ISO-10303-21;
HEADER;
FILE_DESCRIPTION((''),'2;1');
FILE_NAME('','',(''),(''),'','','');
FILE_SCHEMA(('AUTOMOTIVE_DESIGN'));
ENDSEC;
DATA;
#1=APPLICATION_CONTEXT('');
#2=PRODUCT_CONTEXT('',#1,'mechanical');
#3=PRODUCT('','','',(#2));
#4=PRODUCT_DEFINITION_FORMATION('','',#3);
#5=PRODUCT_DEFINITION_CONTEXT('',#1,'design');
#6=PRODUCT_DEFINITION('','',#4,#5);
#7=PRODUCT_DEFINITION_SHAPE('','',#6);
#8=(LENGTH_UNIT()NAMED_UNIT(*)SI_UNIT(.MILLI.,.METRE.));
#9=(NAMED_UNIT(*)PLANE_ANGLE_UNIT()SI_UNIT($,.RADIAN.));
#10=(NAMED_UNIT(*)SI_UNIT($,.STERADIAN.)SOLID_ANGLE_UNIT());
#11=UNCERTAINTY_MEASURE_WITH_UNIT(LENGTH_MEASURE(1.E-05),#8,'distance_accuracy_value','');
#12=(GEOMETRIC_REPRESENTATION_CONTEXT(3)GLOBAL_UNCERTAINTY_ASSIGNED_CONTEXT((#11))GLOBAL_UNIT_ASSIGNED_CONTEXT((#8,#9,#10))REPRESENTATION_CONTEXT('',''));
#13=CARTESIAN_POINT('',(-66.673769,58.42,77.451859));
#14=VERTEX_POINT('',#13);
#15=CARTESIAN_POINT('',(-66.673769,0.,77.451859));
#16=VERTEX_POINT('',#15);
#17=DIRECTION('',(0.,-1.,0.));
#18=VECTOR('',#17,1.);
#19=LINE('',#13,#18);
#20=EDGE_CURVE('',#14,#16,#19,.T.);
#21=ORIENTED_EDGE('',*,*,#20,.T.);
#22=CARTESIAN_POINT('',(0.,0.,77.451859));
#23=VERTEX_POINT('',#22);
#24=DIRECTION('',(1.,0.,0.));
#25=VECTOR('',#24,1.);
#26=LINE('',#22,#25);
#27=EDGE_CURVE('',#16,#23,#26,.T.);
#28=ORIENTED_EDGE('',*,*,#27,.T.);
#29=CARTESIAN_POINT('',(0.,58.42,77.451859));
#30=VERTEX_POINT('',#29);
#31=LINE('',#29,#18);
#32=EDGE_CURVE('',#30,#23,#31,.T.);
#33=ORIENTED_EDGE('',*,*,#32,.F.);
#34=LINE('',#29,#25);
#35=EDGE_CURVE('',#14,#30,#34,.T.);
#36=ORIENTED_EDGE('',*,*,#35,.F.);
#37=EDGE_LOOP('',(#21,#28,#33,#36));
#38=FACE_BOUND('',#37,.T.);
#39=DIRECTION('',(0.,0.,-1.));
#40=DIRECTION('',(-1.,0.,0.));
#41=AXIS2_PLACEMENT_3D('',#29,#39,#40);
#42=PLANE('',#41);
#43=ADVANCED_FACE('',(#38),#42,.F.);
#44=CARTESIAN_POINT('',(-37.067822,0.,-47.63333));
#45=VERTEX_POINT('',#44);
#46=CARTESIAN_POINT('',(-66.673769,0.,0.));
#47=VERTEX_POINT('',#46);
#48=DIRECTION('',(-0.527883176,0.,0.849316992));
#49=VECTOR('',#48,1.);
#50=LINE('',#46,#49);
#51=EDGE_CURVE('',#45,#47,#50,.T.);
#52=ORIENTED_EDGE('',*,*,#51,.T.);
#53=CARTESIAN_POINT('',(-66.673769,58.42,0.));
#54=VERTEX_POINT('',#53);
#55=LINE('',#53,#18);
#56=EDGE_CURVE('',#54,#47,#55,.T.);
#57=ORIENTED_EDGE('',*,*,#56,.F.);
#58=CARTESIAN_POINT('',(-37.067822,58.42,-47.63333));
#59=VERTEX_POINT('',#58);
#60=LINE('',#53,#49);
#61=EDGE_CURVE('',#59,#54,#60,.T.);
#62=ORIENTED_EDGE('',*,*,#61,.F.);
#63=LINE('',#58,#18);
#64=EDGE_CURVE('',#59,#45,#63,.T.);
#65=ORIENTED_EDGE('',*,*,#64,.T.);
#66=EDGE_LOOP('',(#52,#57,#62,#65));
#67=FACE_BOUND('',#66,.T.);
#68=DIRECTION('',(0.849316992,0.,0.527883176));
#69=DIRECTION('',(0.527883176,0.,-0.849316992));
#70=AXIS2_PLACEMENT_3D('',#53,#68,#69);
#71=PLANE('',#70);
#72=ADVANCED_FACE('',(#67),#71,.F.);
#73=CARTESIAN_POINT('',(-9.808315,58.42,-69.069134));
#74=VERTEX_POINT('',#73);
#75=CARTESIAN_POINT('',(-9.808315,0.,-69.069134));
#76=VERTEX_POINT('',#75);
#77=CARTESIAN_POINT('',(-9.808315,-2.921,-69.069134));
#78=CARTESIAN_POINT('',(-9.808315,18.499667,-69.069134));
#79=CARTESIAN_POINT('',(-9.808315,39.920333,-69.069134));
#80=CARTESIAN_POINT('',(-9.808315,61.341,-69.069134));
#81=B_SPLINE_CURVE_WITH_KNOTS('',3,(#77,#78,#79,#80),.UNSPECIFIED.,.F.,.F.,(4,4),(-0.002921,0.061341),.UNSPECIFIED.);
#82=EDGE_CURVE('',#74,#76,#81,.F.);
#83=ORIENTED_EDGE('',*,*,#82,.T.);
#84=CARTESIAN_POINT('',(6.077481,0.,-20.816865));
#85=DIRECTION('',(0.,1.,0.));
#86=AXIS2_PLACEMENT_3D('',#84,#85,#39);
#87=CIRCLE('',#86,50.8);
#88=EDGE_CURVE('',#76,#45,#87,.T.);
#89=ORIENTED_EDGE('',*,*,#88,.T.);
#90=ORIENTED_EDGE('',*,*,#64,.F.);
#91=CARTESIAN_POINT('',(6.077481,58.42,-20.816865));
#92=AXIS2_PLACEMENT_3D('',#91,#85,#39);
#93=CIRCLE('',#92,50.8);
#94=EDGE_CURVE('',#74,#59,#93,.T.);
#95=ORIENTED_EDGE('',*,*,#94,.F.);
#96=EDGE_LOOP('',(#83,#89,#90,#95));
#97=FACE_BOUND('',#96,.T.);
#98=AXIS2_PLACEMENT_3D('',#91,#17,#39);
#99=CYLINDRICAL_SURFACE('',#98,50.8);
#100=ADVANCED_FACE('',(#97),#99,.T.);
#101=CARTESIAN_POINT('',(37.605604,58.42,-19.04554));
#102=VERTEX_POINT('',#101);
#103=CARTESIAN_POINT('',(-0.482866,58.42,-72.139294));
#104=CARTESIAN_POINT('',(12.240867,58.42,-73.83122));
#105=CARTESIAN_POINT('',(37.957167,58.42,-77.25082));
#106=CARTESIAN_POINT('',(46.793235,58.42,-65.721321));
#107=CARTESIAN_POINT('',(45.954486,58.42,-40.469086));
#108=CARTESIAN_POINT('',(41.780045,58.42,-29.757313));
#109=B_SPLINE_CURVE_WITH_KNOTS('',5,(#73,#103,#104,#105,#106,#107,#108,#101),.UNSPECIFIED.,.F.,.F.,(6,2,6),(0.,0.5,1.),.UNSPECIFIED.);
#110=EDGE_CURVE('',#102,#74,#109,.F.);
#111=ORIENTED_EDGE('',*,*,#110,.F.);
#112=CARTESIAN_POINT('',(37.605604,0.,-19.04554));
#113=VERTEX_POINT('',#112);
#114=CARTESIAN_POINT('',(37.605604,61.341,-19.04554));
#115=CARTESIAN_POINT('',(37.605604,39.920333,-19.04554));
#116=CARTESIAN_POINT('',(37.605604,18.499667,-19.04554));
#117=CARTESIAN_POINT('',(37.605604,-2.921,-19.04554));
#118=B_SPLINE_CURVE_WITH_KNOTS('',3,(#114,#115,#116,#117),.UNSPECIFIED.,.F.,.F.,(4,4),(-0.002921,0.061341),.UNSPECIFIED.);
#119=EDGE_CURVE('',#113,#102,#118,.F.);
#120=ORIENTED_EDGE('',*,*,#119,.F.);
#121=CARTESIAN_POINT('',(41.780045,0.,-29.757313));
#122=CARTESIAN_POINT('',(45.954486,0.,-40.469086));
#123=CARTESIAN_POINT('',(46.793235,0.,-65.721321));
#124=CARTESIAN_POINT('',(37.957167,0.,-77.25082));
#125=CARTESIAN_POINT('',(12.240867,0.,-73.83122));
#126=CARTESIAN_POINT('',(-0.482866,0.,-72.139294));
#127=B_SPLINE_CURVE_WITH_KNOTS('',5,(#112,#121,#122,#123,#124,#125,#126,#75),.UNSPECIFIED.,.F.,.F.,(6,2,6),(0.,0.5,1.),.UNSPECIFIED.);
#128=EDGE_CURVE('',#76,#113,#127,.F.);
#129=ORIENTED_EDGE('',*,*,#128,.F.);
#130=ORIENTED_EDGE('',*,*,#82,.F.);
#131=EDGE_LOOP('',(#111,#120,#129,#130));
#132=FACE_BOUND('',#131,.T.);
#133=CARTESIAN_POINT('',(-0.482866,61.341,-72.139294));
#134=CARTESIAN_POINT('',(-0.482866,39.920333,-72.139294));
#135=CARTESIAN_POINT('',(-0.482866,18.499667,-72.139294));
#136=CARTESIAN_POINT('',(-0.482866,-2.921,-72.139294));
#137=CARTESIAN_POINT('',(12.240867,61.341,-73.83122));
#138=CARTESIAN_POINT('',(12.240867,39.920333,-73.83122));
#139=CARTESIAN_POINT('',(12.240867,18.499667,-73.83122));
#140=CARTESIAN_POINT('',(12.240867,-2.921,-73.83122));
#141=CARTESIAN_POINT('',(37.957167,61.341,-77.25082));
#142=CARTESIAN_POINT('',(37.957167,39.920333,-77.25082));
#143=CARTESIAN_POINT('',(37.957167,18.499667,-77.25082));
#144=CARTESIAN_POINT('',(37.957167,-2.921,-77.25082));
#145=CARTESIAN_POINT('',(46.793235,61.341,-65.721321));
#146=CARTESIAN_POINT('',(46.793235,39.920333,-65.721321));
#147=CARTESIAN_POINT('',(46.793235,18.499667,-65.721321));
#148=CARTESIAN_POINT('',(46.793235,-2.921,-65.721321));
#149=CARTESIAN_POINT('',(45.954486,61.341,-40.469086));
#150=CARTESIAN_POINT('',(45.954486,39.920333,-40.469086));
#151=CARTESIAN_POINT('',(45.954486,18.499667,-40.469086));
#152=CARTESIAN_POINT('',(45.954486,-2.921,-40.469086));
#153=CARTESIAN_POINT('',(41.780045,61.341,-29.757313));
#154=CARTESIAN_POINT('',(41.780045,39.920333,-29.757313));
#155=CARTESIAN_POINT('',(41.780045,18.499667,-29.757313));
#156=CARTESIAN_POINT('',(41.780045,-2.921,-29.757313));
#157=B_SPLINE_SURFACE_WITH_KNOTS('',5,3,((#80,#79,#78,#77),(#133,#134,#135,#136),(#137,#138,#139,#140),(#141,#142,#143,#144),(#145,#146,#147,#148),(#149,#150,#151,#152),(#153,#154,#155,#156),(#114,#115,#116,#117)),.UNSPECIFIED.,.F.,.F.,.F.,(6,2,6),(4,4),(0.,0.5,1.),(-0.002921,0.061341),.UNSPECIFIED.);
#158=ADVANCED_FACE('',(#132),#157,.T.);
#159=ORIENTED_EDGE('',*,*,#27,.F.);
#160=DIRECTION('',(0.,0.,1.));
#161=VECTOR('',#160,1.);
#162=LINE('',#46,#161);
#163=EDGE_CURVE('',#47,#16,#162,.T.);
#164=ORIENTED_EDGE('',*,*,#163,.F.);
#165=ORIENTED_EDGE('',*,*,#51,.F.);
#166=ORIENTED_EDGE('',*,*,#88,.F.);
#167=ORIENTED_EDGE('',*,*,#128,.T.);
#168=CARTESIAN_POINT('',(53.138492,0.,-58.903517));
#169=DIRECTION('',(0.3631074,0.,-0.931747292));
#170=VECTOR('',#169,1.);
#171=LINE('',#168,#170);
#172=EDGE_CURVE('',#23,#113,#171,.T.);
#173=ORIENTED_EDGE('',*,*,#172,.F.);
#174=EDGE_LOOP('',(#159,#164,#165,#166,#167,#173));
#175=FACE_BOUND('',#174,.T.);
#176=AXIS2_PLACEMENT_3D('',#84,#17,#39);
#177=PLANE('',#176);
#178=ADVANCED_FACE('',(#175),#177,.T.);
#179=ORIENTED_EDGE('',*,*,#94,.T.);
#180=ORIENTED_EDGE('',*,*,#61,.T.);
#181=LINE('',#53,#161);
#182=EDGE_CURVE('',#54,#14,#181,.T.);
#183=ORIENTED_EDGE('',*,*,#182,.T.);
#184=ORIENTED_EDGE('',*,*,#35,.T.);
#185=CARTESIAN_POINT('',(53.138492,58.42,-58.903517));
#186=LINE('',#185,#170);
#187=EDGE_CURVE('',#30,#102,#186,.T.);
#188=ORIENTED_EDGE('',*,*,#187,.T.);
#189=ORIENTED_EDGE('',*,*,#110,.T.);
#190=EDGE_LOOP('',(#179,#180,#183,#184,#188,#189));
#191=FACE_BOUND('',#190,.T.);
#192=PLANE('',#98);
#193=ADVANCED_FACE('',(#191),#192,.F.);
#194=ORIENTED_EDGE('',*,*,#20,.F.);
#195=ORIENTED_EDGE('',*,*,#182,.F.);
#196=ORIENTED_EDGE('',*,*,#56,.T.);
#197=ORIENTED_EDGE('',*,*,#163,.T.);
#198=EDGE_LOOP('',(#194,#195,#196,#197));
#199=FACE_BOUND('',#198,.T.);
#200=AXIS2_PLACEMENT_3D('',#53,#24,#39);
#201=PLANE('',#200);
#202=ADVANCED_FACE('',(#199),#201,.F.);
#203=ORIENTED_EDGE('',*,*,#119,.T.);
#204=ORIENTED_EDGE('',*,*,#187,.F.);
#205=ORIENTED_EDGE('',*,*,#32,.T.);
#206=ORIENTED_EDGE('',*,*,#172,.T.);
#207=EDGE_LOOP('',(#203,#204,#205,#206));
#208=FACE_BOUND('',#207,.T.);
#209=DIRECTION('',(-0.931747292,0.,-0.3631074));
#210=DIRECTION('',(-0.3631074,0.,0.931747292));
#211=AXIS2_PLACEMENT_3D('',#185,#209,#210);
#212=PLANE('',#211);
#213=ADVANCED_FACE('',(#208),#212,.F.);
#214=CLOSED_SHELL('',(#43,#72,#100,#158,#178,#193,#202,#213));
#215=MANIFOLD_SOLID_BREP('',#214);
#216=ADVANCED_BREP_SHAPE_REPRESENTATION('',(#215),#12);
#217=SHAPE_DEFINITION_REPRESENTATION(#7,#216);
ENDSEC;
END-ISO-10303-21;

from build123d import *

# Parameters (mm, degrees)
BOSS_EXTRUDE1_DEPTH = 58.42
FILLET9_START       = -1
FILLET9_DEPTH       = 60
FILLET9_2_DEPTH     = 58.42


with BuildPart() as part:
    # Sketch1 → Boss-Extrude1 (new body)
    with BuildSketch(Plane(origin=(0, 0, 0), x_dir=(1, 0, 0), z_dir=(0, 1, 0))):
        with BuildLine():
            Line((-66.673768512, 0), (-37.067821873, 47.633329988))
            ThreePointArc((-37.067821873, 47.633329988), (-11.329209284, 68.541566023), (21.82652777, 69.113940477))
            Line((21.82652777, 69.113940477), (53.138492197, 58.903517294))
            Line((53.138492197, 58.903517294), (0, -77.45185891))
            Line((0, -77.45185891), (-66.673768512, -77.45185891))
            Line((-66.673768512, -77.45185891), (-66.673768512, 0))
        make_face()
    extrude(amount=BOSS_EXTRUDE1_DEPTH)

    # Fillet9: read off the stored shape, not the designer's step
    # Fillet9 outline → Fillet9 (cut)
    with BuildSketch(Plane(origin=(0, 0, 0), x_dir=(1, 0, 0), z_dir=(0, 1, 0)).offset(FILLET9_START)):
        with BuildLine():
            Line((53.138492197, 58.903517294), (42.560128995, 62.352983555))
            add(Edge.make_bspline(
                [(42.560128995, 62.352983555), (45.276451429, 55.785497085), (45.88017533, 47.021967979), (44.583604834, 36.951353495), (41.094604397, 27.998446712), (37.605603959, 19.045539929)],
                knots=[0.582099673, 0.582099673, 0.582099673, 0.582099673, 0.582099673, 0.582099673, 1, 1, 1, 1, 1, 1], degree=5))
            Line((37.605603959, 19.045539929), (53.138492197, 58.903517294))
        make_face()
    extrude(amount=FILLET9_DEPTH, mode=Mode.SUBTRACT)

    # Fillet9 2 outline → Fillet9 2 (add)
    with BuildSketch(Plane(origin=(0, 0, 0), x_dir=(1, 0, 0), z_dir=(0, 1, 0))):
        with BuildLine():
            add(Edge.make_bspline(
                [(-9.808315325, 69.069133652), (-0.482865879, 72.139293798), (12.240866744, 73.831219733), (27.210316696, 75.821767739), (36.460068296, 72.746962644), (41.411307971, 64.848690609), (42.026486953, 63.643215838), (42.560128995, 62.352983555)],
                knots=[0, 0, 0, 0, 0, 0, 0.5, 0.5, 0.582099673, 0.582099673, 0.582099673, 0.582099673, 0.582099673, 0.582099673], degree=5))
            ThreePointArc((-9.808315325, 69.069133652), (6.005529482, 71.616813676), (21.82652777, 69.113940477))
            Line((21.82652777, 69.113940477), (42.560128995, 62.352983555))
        make_face()
    extrude(amount=FILLET9_2_DEPTH)


solid = part.part
